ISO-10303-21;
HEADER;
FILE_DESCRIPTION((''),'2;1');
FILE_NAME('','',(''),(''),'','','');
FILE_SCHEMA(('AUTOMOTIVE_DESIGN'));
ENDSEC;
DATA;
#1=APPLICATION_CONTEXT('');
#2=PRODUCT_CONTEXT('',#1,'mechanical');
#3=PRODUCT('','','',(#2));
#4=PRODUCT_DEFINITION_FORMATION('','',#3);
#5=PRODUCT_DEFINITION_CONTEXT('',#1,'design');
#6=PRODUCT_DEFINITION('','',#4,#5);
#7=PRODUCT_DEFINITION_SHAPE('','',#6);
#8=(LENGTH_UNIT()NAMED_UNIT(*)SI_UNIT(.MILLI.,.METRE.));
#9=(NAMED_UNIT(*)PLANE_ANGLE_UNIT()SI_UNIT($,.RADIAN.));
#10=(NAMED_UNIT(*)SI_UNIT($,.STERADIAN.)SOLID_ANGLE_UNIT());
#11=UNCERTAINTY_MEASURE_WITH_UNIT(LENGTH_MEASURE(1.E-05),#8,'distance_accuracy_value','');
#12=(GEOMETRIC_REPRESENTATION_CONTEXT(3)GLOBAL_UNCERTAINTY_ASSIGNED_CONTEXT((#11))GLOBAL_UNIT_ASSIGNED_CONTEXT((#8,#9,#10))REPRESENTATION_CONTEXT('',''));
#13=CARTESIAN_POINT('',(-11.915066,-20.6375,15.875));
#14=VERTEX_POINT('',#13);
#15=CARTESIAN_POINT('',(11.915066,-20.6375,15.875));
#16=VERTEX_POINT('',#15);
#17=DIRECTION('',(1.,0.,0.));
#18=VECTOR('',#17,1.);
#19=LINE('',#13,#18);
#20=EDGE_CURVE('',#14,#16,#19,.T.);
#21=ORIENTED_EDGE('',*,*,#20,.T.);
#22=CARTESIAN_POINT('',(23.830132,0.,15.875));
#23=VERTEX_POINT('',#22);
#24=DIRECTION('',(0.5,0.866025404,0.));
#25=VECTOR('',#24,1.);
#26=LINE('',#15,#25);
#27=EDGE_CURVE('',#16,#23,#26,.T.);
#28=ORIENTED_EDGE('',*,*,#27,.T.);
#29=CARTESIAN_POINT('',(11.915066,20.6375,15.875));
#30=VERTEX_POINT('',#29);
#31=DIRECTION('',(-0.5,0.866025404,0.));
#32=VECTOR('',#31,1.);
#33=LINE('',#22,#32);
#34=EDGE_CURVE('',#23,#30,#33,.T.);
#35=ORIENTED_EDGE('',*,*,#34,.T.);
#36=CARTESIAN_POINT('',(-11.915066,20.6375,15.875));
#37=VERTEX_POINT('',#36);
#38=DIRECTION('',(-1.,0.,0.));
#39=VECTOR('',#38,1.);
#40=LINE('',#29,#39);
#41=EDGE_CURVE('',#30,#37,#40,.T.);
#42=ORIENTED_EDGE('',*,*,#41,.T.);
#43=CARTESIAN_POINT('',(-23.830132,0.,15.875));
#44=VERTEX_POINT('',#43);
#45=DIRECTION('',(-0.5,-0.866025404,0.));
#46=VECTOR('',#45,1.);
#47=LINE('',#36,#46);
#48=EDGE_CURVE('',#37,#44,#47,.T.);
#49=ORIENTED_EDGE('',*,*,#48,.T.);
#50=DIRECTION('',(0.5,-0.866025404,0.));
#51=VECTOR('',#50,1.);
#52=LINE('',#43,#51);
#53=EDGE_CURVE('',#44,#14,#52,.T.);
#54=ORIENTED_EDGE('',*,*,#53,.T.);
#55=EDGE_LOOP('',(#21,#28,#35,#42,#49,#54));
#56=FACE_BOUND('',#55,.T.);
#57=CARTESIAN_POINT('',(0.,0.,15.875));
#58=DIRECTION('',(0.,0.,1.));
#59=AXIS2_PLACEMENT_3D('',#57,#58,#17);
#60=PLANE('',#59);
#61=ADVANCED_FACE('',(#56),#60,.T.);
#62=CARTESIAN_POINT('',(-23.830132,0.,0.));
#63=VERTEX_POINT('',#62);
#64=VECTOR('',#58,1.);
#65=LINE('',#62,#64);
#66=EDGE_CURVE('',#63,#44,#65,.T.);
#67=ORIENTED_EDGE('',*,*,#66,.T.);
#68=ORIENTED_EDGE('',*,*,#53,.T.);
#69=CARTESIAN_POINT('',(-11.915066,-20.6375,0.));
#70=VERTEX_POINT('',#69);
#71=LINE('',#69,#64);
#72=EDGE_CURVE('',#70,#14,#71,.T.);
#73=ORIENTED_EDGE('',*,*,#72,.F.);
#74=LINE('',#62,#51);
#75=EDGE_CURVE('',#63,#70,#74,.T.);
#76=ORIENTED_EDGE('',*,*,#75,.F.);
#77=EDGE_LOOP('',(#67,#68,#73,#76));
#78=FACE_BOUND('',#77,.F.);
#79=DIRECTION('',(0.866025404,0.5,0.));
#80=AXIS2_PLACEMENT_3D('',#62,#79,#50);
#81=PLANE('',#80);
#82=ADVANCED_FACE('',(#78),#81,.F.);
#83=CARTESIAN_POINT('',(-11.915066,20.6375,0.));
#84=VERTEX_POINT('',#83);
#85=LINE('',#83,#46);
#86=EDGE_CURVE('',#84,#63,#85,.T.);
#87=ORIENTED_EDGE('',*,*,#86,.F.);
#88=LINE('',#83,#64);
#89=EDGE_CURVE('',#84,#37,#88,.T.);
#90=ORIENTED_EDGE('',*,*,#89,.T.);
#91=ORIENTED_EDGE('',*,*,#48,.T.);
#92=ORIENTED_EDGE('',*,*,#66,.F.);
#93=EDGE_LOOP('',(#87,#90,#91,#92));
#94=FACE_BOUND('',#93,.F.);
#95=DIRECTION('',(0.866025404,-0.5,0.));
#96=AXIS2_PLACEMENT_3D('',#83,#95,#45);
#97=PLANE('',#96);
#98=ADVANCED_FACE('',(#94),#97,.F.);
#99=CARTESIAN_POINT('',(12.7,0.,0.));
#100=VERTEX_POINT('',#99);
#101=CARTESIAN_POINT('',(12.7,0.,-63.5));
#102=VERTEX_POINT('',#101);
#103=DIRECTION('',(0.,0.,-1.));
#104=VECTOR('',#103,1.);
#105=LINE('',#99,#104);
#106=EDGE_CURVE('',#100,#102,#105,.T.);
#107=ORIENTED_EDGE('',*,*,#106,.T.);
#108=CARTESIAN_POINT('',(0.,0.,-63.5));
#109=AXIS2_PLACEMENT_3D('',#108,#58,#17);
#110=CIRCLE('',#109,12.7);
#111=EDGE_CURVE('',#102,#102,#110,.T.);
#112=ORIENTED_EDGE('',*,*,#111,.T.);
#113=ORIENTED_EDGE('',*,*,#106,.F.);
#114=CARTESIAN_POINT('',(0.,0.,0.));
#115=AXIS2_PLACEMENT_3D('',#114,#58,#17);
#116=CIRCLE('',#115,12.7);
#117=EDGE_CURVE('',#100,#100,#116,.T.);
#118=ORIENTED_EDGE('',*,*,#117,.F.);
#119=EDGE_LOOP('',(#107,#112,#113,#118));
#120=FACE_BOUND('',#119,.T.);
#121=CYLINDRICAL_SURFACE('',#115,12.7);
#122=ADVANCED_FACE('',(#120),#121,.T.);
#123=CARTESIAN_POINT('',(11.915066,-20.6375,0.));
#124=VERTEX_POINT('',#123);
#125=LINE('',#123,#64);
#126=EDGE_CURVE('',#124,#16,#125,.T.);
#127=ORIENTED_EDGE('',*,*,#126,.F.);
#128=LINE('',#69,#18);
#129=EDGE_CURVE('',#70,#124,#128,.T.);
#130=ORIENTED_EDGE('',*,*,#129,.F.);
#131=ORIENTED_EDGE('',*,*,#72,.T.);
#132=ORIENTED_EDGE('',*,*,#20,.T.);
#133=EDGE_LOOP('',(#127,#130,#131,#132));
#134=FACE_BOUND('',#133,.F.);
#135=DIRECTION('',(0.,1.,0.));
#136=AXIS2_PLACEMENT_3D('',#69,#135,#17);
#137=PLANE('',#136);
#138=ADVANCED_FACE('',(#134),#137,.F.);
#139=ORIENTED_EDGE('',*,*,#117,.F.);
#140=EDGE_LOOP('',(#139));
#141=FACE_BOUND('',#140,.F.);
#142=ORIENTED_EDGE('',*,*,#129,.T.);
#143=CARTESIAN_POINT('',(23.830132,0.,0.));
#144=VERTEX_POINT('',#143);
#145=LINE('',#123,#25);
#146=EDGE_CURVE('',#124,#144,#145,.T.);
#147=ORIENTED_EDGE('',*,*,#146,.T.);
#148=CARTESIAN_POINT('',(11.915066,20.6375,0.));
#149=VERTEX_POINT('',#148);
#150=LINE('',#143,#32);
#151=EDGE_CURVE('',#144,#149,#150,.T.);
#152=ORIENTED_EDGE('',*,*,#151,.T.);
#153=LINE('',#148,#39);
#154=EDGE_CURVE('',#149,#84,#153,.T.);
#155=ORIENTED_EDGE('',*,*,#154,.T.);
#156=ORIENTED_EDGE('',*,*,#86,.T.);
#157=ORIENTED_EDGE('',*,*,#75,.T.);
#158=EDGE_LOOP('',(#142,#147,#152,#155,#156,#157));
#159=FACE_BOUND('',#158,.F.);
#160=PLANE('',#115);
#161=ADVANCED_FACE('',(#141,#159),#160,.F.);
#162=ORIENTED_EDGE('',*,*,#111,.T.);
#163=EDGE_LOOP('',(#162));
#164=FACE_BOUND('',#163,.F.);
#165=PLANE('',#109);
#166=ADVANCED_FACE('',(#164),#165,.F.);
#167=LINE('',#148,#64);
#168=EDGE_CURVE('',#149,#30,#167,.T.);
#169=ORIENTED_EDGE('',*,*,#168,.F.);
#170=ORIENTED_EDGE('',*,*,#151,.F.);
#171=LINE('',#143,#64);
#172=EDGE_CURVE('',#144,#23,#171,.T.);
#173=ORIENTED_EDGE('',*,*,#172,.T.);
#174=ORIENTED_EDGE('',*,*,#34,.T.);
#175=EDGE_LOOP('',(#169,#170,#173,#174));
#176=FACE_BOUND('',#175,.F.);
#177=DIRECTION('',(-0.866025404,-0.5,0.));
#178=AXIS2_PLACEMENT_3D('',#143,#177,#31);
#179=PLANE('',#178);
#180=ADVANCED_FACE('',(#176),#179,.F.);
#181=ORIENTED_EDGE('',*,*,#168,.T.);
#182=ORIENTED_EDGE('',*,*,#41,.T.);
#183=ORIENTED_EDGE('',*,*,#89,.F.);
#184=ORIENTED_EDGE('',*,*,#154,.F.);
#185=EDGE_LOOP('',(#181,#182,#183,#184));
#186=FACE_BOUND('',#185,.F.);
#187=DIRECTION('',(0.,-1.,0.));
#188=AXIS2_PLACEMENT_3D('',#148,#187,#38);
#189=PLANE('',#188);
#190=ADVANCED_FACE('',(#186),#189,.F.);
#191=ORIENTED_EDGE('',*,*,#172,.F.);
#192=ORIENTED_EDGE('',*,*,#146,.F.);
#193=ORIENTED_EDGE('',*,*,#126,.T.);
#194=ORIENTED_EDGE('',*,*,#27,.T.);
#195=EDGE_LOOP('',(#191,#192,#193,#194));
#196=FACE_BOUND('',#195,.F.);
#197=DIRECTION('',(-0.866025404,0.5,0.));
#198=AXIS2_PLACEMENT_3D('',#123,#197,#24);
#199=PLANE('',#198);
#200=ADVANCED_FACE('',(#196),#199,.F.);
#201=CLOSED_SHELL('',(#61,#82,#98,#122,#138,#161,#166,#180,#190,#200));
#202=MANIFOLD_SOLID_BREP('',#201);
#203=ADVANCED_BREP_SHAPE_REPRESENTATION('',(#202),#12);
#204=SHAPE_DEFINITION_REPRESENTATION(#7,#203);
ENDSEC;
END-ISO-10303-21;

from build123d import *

# Parameters (mm, degrees)
F0_R     = 12.7
F1_DEPTH = 63.5
F3_DEPTH = 15.875


# Not quite as in the source:
# - a feature names something its author has since deleted; it is built from what else it names


with BuildPart() as f1:
    # F0 (on Top) → F1 (new body)
    with BuildSketch(Plane.XY):
        Circle(F0_R)
    extrude(amount=-F1_DEPTH)

    # F2 (on face) → F3 (join)
    with BuildSketch(Plane.XY):
        Polygon((11.9150661804, 20.6375), (-11.9150661804, 20.6375), (-23.8301323608, 0), (-11.9150661804, -20.6375), (11.9150661804, -20.6375), (23.8301323608, 0), align=None)
    extrude(amount=F3_DEPTH)


solid = f1.part
